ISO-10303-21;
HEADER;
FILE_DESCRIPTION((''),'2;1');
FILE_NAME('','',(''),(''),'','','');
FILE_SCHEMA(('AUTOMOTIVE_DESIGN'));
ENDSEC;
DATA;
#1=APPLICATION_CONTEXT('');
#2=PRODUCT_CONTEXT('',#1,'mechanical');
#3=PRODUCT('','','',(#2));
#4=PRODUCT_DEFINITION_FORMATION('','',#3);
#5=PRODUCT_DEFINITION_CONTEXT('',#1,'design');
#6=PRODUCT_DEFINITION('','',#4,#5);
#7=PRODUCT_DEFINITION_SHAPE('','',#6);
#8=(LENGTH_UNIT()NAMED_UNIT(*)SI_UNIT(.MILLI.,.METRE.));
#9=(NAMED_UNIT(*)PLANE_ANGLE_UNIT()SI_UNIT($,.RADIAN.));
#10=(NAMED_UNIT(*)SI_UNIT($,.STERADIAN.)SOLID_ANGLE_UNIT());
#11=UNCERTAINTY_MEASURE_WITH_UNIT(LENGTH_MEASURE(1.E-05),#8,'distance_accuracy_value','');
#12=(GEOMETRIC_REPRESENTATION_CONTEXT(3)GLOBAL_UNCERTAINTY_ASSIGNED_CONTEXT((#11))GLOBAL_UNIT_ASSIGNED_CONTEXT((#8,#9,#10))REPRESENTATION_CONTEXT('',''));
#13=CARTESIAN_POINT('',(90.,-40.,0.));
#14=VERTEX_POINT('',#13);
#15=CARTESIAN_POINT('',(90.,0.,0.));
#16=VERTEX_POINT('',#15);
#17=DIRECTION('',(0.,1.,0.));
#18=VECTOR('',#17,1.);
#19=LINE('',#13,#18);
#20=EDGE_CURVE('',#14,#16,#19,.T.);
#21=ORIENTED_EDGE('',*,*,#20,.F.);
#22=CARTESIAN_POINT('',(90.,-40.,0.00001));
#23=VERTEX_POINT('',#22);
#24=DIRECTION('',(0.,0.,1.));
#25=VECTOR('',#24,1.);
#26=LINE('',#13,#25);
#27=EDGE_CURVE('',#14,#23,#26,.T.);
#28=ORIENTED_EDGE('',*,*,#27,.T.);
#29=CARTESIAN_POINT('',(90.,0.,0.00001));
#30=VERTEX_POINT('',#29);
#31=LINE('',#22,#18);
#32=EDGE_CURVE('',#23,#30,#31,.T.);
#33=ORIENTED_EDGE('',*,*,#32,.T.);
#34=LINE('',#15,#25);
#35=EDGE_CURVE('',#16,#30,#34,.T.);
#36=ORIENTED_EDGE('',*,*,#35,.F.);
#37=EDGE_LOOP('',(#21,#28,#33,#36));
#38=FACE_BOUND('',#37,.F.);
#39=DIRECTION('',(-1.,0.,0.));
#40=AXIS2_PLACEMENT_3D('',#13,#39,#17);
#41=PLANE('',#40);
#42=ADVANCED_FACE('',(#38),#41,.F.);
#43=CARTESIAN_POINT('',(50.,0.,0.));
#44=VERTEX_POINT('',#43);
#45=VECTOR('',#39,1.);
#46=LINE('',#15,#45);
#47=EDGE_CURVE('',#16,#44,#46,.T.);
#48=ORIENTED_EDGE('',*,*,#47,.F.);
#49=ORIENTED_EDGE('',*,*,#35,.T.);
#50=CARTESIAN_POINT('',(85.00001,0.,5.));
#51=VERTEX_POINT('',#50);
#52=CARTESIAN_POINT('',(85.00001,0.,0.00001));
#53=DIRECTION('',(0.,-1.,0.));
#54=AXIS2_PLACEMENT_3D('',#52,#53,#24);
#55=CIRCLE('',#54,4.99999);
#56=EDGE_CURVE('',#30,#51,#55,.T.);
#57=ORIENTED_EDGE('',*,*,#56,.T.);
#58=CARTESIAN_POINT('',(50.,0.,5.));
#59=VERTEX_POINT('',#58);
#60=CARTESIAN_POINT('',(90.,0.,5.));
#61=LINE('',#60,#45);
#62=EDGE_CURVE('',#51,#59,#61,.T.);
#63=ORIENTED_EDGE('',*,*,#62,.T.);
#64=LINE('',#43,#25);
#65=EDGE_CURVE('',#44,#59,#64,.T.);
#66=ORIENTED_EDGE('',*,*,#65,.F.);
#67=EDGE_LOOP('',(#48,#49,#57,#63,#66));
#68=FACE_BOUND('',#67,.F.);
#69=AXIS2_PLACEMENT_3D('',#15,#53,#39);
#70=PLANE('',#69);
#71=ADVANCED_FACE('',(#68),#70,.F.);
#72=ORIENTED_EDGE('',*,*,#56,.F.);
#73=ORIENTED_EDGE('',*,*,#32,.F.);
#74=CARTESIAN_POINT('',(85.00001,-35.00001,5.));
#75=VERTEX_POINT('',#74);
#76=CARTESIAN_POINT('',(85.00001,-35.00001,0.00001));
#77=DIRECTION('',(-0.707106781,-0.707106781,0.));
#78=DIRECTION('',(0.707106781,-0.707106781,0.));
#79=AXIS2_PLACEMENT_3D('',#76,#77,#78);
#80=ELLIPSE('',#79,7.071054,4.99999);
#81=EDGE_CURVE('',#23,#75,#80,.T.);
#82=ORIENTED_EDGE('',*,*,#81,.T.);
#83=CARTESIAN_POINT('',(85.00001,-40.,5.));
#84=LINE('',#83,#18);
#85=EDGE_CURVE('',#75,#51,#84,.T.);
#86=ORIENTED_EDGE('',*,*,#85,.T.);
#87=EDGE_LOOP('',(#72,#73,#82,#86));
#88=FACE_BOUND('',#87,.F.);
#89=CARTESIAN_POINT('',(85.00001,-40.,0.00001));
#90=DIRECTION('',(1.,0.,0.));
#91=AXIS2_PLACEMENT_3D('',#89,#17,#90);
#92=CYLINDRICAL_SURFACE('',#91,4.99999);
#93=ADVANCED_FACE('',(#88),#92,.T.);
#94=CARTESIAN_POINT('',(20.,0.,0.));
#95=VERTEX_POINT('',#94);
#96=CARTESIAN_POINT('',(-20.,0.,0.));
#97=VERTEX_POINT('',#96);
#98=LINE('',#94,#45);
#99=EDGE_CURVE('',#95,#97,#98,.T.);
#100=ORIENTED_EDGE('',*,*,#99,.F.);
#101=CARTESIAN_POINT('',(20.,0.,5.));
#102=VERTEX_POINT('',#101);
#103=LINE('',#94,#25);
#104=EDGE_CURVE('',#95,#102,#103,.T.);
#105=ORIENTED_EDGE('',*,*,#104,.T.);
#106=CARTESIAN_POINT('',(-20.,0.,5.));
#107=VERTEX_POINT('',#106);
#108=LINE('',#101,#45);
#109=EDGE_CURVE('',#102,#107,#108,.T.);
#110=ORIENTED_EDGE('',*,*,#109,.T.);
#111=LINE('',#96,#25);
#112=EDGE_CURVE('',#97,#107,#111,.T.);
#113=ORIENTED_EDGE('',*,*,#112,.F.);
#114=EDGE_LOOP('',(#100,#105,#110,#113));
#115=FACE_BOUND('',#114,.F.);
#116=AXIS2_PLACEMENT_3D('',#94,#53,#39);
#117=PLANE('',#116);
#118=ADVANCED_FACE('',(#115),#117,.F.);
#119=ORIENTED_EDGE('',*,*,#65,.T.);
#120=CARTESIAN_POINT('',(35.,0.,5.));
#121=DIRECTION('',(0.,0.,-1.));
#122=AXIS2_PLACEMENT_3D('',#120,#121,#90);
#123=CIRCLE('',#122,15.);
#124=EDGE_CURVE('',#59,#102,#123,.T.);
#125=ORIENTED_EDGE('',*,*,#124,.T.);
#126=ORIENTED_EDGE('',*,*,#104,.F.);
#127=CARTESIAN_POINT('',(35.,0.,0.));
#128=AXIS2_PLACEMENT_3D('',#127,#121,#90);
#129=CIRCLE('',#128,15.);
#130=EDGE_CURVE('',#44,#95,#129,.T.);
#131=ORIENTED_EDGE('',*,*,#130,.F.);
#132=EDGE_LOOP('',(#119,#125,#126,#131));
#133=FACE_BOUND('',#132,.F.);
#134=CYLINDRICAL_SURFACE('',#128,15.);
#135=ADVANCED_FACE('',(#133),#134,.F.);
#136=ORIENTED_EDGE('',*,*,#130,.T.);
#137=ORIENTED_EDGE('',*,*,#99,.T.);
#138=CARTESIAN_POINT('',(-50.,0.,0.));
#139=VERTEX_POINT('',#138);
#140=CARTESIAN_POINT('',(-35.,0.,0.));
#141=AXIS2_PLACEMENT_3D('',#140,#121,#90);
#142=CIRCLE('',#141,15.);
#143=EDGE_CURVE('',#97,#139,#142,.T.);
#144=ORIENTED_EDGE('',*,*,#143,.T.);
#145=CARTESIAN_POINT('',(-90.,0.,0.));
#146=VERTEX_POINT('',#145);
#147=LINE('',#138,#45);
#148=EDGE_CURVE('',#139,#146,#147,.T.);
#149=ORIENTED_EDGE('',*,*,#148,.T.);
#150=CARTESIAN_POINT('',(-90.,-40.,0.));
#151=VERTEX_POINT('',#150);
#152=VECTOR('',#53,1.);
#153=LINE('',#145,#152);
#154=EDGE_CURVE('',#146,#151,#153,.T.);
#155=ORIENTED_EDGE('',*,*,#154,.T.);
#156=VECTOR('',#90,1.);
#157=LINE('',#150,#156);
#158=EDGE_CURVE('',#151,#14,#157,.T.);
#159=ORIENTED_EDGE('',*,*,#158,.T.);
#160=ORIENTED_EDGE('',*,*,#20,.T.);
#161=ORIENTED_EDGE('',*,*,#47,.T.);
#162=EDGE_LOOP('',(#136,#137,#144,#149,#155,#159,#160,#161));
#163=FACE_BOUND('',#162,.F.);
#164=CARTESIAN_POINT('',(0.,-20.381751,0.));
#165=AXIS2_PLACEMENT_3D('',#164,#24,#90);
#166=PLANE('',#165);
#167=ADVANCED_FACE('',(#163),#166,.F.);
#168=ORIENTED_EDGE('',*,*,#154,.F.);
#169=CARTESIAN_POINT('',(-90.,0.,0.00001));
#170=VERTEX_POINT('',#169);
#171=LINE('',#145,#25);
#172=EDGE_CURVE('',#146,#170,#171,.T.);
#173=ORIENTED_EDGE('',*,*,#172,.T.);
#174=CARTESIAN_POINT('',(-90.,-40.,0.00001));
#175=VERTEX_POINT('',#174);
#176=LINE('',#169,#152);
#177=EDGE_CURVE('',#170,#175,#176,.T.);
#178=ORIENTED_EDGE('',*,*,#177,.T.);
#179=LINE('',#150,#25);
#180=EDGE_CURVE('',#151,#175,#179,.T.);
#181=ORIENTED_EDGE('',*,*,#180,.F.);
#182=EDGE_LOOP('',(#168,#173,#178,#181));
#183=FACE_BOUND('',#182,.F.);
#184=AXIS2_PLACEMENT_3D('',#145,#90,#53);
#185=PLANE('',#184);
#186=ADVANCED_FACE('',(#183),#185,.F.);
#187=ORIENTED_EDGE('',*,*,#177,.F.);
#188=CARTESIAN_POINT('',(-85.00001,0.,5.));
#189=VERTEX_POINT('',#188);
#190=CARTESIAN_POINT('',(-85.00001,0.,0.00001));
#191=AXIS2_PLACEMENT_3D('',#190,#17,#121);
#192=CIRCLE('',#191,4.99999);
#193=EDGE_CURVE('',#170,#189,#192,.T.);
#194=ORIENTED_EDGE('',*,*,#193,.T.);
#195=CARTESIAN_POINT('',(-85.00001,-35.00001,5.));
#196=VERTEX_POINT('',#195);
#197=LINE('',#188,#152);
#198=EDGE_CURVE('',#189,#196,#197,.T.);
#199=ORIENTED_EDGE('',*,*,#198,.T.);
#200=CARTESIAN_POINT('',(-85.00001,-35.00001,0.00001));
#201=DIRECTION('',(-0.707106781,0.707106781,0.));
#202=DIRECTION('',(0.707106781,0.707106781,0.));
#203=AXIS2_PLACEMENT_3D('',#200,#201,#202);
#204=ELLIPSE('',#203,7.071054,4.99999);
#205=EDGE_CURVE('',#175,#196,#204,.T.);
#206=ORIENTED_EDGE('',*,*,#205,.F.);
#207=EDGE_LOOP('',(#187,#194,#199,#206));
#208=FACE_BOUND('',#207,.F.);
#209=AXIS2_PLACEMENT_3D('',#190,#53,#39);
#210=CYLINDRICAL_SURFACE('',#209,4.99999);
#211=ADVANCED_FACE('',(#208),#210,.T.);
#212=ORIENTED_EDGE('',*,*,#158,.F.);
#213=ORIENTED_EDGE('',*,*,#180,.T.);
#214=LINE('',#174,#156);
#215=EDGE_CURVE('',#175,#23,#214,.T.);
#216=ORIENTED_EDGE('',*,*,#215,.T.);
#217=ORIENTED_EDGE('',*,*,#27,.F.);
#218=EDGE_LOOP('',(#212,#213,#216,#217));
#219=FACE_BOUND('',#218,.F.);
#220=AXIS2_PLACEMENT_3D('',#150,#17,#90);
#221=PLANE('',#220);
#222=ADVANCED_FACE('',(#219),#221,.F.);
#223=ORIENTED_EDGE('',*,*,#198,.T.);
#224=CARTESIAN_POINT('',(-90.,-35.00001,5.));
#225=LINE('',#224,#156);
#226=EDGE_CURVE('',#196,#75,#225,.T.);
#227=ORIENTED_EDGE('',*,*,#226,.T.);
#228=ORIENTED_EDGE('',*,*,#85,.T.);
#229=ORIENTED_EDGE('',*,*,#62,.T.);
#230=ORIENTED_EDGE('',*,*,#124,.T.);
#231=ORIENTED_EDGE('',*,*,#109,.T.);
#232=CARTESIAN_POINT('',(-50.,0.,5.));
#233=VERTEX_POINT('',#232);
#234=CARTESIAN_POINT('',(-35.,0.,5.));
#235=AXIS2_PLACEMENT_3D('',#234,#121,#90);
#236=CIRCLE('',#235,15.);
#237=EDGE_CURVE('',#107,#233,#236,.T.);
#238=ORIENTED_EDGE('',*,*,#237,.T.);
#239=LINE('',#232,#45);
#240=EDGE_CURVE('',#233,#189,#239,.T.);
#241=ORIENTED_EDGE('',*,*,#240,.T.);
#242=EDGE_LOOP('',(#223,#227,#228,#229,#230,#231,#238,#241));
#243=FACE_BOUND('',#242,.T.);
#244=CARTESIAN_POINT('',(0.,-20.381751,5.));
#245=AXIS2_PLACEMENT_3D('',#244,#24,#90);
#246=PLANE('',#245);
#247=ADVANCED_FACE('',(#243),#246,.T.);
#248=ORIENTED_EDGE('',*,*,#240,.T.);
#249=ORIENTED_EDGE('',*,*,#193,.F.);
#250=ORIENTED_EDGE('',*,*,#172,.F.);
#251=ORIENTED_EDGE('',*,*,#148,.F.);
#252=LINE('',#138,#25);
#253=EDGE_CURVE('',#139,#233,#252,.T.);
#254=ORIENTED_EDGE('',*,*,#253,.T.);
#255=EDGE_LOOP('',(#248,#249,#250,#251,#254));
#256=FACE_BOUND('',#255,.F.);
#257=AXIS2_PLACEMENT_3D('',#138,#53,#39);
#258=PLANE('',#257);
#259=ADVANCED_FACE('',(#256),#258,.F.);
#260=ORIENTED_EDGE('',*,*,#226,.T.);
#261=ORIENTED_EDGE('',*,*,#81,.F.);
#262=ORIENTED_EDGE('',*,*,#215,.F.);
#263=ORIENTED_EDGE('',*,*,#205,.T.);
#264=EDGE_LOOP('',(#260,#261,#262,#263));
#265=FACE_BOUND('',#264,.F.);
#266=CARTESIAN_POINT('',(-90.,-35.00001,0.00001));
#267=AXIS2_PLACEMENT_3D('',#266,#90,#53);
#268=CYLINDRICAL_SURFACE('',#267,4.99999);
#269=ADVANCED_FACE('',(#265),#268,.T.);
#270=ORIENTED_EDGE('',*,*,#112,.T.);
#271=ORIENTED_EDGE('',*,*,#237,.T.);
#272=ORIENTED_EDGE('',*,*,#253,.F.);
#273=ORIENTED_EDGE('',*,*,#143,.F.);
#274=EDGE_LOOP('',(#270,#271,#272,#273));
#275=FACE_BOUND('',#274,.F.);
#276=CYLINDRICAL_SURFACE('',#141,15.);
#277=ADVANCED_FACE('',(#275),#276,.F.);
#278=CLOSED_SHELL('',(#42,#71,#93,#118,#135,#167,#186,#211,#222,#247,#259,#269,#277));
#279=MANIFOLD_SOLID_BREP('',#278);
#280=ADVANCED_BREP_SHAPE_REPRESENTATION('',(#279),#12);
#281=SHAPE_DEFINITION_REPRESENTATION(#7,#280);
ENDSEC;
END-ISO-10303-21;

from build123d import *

# Parameters (mm, degrees)
F1_DEPTH = 5
F2_R     = 4.99999


# Not quite as in the source:
# - a fillet or chamfer is up to 0.001 mm smaller than in the source, because OpenCascade refuses the exact size


with BuildPart() as f1:
    # F0 (on Top) → F1 (new body)
    with BuildSketch(Plane.XY):
        with BuildLine():
            Line((20, 0), (0, 0))
            Line((0, 0), (-20, 0))
            ThreePointArc((-20, 0), (-35, -15), (-50, 0))
            Line((-50, 0), (-90, 0))
            Line((-90, 0), (-90, -40))
            Line((-90, -40), (0, -40))
            Line((0, -40), (90, -40))
            Line((90, -40), (90, 0))
            Line((90, 0), (50, 0))
            ThreePointArc((50, 0), (35, -15), (20, 0))
        make_face()
    extrude(amount=F1_DEPTH)

    # F2 (radius 5 in the source; OpenCascade refuses exactly that, so slightly less here)
    f2_edges = [f1.edges().sort_by_distance(p)[0] for p in [
        (0, -40, 5),
        (-90, -20, 5),
        (90, -20, 5),
    ]]
    fillet(f2_edges, radius=F2_R)


solid = f1.part
